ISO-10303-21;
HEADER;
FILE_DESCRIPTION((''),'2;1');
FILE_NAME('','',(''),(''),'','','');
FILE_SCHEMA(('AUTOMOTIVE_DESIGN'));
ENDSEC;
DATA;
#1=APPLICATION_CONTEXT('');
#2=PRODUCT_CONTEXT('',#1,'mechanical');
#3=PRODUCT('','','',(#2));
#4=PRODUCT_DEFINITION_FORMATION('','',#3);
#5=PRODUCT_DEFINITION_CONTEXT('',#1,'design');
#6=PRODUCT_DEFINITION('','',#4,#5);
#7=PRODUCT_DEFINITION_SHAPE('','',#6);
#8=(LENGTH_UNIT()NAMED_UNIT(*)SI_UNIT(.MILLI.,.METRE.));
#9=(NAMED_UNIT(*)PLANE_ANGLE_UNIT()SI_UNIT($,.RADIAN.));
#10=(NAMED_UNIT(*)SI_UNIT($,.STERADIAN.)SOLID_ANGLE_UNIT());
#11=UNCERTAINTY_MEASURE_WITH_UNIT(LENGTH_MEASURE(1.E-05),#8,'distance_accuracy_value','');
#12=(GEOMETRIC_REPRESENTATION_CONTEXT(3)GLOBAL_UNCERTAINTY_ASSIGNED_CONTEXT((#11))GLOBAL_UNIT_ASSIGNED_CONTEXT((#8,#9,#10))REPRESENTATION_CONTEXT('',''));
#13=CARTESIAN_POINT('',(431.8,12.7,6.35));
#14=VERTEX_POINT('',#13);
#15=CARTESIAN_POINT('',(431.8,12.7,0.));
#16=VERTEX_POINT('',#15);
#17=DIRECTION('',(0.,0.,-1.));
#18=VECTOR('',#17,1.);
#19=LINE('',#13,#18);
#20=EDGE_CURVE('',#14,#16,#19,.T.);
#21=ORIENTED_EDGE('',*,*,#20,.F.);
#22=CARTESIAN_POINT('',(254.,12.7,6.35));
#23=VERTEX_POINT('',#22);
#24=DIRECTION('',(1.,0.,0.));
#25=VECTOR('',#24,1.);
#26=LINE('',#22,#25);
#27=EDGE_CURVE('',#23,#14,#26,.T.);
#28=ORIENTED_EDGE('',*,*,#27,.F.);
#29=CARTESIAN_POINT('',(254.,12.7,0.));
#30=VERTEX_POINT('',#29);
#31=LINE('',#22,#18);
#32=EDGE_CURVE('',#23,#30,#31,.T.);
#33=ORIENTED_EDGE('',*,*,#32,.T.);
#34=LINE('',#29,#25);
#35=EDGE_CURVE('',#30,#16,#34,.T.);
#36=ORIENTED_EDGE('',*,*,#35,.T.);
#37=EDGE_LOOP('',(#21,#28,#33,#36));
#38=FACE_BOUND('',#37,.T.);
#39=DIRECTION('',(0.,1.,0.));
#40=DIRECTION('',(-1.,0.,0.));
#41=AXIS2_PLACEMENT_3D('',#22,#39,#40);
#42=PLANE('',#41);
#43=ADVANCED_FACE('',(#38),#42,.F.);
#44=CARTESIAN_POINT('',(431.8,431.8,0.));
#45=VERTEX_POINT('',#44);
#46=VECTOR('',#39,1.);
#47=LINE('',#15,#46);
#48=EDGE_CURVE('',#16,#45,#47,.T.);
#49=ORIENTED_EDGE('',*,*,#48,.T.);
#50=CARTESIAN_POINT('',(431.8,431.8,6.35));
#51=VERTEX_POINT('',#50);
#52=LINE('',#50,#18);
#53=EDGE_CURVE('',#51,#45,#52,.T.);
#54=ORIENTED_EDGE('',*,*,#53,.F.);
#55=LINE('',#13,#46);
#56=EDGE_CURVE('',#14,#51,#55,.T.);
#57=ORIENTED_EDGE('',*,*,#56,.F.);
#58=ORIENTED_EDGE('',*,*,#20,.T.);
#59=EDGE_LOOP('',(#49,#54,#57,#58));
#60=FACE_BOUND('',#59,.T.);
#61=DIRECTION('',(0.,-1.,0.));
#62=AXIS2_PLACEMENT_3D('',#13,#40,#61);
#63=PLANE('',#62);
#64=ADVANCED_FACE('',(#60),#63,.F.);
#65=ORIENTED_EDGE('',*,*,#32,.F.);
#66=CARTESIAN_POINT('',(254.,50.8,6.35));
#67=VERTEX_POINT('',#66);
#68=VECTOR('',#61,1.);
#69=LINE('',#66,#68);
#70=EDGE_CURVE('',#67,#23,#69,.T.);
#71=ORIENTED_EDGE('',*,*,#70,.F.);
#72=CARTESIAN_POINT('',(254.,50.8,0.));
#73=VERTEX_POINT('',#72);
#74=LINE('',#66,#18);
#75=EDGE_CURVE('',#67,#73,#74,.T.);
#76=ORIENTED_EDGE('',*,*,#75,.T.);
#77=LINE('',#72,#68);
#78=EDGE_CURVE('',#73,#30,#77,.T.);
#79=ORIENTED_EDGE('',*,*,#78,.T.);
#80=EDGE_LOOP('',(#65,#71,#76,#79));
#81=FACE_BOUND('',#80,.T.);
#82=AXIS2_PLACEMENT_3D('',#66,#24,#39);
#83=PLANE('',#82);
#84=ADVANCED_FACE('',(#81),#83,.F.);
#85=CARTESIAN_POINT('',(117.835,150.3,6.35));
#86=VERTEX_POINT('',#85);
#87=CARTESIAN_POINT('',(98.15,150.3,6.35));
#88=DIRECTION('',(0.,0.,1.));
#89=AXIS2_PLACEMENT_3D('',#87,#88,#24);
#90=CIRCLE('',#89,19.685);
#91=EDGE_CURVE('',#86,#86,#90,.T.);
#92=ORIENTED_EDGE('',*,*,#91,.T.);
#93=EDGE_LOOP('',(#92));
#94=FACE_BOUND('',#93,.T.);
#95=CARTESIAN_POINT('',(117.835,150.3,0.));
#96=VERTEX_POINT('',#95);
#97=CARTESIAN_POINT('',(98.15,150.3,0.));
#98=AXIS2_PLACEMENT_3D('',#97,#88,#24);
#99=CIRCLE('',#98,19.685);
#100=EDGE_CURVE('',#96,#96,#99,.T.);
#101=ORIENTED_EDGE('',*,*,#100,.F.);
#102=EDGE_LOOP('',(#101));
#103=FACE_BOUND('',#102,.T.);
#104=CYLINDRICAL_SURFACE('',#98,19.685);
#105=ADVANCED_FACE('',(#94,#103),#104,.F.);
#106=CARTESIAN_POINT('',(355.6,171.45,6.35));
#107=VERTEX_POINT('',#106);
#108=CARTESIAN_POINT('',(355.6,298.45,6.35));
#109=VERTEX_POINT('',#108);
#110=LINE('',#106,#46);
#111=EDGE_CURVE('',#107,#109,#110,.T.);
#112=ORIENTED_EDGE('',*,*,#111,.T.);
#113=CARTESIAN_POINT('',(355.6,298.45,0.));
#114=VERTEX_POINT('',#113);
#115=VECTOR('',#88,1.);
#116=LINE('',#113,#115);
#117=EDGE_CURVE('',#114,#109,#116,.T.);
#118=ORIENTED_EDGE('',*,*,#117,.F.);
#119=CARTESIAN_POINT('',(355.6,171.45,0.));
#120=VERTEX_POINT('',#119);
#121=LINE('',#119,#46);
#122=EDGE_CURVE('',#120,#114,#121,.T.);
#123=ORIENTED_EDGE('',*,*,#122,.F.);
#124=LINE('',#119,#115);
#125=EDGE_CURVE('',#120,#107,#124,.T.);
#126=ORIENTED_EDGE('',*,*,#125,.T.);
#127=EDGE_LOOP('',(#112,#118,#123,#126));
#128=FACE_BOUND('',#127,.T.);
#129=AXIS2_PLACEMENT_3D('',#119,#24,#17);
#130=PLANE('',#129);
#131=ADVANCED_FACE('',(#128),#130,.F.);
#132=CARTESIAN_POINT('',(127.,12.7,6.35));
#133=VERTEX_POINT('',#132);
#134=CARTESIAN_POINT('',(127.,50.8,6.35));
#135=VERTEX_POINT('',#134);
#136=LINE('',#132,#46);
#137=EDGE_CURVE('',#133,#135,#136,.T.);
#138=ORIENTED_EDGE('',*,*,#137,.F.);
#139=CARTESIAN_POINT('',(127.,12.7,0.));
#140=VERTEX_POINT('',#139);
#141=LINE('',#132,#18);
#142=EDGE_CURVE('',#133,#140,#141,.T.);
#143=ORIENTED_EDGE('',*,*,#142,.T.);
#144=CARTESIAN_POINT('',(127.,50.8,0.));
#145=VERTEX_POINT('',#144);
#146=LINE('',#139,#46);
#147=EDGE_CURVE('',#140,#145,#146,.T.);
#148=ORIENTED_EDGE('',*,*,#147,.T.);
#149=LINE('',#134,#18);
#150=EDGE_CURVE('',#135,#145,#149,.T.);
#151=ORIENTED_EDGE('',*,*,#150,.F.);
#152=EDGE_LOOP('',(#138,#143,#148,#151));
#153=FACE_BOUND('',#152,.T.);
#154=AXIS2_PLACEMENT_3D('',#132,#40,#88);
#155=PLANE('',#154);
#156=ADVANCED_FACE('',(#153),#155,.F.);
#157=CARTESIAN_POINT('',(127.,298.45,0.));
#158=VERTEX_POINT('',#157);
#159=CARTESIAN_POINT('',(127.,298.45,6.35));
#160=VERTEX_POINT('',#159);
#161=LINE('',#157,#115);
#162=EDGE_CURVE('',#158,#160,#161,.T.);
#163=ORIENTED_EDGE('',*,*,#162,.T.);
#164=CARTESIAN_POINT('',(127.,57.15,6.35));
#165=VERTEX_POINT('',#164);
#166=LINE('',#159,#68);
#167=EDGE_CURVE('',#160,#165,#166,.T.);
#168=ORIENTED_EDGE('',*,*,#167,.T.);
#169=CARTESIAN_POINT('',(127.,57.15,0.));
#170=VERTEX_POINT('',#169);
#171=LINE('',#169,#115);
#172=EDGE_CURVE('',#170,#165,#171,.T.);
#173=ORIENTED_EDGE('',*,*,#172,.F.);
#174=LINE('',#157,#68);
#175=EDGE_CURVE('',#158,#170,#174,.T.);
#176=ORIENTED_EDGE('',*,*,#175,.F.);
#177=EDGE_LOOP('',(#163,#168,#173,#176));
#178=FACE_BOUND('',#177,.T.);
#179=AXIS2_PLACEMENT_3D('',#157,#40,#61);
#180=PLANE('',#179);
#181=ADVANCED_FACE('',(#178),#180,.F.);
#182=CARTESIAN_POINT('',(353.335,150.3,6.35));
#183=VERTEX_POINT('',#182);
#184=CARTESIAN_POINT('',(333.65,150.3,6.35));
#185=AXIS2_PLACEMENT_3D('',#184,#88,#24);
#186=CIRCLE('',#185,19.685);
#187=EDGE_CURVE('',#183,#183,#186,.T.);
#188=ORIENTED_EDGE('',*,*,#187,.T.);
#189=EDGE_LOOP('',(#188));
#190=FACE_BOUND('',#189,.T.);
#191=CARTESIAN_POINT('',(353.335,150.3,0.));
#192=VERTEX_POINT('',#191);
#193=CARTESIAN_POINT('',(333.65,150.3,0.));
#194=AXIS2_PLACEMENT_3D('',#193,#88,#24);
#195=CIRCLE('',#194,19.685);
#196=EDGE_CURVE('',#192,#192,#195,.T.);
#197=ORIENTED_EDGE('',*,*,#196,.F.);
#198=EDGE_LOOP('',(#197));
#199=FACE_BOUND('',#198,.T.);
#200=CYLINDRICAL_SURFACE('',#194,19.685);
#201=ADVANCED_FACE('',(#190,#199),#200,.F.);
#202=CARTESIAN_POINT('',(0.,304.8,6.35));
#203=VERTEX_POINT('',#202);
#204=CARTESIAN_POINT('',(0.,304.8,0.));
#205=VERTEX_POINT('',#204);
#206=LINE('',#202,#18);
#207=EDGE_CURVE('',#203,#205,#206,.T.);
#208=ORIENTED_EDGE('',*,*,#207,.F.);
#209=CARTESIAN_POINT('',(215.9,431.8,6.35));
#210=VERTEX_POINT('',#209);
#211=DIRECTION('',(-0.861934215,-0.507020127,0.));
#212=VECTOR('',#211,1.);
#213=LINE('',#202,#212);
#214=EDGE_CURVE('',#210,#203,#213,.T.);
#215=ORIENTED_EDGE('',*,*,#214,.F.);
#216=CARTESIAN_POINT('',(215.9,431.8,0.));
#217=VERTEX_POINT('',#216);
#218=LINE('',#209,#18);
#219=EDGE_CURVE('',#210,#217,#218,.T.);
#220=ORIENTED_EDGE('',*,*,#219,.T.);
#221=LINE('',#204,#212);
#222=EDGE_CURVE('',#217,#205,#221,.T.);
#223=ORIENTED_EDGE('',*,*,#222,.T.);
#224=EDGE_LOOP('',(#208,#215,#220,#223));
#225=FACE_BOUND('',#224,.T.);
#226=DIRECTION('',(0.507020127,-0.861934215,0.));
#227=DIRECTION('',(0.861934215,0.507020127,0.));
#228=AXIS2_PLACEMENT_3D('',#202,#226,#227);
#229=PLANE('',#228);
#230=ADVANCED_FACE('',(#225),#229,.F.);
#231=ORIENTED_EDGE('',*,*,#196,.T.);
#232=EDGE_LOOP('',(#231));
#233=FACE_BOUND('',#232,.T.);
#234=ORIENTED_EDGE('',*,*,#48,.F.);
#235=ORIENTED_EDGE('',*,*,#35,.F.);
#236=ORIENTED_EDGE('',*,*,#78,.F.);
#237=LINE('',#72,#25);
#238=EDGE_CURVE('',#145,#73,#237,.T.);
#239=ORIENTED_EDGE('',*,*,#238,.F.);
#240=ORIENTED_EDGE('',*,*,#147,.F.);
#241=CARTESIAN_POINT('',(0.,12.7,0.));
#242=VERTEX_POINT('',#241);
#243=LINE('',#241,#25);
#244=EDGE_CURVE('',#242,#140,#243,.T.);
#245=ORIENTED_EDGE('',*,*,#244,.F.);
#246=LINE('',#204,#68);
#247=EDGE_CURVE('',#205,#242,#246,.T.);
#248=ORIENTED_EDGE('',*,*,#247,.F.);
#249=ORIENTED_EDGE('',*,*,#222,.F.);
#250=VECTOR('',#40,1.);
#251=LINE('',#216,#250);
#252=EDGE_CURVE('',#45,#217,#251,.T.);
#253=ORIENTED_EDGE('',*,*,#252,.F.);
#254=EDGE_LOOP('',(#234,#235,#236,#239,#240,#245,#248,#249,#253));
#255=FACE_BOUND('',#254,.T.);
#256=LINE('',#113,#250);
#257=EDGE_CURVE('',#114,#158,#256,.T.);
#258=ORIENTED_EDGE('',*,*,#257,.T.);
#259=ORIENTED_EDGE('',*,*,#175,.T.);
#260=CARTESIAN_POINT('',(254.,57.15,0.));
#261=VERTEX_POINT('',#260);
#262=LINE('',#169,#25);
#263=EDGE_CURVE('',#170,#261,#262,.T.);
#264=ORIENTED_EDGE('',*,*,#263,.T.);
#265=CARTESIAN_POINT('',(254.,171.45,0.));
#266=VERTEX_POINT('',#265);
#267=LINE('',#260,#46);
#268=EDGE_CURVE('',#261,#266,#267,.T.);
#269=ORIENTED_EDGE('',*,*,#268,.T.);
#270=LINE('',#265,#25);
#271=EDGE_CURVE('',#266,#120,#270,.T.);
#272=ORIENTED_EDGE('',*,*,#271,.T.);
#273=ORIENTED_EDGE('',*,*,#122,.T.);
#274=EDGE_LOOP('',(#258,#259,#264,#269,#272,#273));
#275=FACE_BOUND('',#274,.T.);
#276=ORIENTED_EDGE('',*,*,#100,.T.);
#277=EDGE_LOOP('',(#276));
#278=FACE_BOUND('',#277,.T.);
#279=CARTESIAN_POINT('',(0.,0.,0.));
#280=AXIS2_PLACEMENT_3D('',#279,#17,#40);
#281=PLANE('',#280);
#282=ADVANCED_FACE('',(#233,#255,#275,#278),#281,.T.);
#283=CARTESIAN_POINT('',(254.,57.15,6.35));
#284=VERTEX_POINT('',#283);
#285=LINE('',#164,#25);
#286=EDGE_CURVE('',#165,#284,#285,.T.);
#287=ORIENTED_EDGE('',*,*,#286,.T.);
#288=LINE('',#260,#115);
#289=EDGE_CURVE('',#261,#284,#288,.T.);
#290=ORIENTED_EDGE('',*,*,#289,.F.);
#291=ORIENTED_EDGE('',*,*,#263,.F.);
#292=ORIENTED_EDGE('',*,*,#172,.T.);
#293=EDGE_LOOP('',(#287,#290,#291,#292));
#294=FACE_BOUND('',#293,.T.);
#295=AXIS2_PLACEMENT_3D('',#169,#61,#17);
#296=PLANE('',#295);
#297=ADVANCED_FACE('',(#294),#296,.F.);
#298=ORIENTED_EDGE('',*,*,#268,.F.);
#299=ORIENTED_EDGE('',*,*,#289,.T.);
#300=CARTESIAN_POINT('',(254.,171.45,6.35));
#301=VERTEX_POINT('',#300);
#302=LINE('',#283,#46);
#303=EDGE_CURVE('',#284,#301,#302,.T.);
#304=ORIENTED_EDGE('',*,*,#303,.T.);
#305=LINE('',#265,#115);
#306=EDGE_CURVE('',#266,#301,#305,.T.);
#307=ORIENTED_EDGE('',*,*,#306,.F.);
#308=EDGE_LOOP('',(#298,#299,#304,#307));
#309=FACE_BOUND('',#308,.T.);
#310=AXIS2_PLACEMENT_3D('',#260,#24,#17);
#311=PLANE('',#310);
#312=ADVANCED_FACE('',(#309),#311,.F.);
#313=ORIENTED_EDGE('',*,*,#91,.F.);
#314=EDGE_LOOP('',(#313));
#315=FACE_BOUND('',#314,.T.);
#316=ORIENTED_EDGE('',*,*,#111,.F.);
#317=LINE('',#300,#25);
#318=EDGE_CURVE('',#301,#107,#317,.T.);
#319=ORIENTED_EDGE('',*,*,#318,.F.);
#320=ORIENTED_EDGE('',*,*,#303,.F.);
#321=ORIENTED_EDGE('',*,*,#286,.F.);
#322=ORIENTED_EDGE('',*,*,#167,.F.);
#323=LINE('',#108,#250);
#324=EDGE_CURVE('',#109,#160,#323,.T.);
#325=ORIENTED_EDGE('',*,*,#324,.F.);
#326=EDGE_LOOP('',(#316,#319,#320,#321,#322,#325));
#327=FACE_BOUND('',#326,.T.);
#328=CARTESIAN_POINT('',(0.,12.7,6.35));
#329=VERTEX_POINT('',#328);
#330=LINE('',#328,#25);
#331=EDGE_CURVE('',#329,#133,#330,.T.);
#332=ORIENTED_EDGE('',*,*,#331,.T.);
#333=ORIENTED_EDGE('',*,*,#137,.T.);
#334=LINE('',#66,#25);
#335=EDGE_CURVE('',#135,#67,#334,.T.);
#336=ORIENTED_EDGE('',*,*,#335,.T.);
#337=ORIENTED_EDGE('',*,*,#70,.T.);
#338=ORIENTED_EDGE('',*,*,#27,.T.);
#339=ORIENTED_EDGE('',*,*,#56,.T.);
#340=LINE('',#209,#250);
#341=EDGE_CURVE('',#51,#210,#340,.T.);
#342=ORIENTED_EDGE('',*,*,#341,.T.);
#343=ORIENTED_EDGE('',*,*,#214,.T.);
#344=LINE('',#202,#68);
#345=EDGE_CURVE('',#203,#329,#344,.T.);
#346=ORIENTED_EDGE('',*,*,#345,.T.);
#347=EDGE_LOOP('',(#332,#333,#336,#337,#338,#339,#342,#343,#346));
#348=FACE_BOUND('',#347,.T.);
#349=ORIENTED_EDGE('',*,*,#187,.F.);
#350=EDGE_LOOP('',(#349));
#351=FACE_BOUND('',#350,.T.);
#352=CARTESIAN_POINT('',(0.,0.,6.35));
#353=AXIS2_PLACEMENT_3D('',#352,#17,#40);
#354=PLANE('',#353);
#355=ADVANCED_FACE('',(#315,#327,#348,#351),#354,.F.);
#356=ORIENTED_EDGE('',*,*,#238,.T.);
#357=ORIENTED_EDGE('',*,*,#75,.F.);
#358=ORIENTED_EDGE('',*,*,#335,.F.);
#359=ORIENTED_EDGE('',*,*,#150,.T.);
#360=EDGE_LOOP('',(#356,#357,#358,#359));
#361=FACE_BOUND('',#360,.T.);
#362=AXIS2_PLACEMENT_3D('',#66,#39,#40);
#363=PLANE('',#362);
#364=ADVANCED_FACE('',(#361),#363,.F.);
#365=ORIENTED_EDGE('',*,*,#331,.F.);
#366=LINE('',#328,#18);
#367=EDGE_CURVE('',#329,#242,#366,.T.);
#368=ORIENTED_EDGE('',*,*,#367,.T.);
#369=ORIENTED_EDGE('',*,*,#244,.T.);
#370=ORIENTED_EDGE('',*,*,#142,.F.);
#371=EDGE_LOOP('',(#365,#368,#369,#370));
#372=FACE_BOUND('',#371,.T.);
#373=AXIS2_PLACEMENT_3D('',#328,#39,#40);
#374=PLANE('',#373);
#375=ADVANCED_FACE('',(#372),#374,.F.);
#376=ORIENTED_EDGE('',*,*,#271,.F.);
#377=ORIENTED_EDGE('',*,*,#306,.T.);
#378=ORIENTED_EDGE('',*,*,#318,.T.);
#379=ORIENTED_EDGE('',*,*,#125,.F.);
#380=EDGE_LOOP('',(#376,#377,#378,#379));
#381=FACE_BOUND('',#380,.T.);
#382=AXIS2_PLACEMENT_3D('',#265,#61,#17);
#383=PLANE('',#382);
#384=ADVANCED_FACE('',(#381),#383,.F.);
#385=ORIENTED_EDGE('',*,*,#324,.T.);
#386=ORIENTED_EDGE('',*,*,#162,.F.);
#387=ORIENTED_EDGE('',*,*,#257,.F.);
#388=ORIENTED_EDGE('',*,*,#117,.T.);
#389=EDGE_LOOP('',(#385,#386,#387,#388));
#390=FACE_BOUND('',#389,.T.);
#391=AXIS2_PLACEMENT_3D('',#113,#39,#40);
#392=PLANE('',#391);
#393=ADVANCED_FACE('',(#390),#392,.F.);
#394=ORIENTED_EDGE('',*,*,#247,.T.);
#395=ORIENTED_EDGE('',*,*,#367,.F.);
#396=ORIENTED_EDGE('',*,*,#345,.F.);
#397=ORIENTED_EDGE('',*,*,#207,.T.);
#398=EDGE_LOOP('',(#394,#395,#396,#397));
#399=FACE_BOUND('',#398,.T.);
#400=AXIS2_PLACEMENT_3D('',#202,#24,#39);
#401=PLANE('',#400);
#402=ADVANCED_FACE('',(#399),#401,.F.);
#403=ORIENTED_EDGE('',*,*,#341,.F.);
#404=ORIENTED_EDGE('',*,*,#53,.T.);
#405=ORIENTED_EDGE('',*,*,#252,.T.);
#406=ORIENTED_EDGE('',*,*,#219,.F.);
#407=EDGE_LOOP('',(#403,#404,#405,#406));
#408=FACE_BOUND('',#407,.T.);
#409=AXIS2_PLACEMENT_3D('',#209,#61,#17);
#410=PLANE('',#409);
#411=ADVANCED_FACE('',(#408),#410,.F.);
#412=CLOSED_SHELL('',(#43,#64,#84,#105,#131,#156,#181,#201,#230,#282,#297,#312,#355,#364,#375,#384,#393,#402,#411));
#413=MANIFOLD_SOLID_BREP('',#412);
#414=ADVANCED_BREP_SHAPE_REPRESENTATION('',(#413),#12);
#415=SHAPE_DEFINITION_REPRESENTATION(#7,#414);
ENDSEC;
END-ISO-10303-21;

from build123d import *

# Parameters (mm, degrees)
FRAME_EXTERIOR_MASTER_OUTLINE_R = 19.685
FRAME_EXTERIOR_MASTER_DEPTH     = 6.35
CUT_EXTRUDE1_DEPTH              = 611.690430988


# Read off the part's stored shape, not the designer's step: Frame Exterior Master
with BuildPart() as part:
    # Frame Exterior Master outline → Frame Exterior Master (new body)
    with BuildSketch(Plane.XY):
        Polygon((431.8, 12.7), (431.8, 431.8), (215.9, 431.8), (0, 304.8), (0, 12.7), (127, 12.7), (127, 50.8), (254, 50.8), (254, 12.7), align=None)
        with Locations((98.15, 150.3)):
            Circle(FRAME_EXTERIOR_MASTER_OUTLINE_R, mode=Mode.SUBTRACT)
        with Locations((333.65, 150.3)):
            Circle(FRAME_EXTERIOR_MASTER_OUTLINE_R, mode=Mode.SUBTRACT)
    extrude(amount=FRAME_EXTERIOR_MASTER_DEPTH)

    # Sketch1 → Cut-Extrude1 (cut, through all)
    with BuildSketch(Plane.XY.offset(6.35)):
        Polygon((127, 298.45), (127, 57.15), (254, 57.15), (254, 171.45), (355.6, 171.45), (355.6, 298.45), align=None)
    extrude(amount=-CUT_EXTRUDE1_DEPTH, mode=Mode.SUBTRACT)


solid = part.part
